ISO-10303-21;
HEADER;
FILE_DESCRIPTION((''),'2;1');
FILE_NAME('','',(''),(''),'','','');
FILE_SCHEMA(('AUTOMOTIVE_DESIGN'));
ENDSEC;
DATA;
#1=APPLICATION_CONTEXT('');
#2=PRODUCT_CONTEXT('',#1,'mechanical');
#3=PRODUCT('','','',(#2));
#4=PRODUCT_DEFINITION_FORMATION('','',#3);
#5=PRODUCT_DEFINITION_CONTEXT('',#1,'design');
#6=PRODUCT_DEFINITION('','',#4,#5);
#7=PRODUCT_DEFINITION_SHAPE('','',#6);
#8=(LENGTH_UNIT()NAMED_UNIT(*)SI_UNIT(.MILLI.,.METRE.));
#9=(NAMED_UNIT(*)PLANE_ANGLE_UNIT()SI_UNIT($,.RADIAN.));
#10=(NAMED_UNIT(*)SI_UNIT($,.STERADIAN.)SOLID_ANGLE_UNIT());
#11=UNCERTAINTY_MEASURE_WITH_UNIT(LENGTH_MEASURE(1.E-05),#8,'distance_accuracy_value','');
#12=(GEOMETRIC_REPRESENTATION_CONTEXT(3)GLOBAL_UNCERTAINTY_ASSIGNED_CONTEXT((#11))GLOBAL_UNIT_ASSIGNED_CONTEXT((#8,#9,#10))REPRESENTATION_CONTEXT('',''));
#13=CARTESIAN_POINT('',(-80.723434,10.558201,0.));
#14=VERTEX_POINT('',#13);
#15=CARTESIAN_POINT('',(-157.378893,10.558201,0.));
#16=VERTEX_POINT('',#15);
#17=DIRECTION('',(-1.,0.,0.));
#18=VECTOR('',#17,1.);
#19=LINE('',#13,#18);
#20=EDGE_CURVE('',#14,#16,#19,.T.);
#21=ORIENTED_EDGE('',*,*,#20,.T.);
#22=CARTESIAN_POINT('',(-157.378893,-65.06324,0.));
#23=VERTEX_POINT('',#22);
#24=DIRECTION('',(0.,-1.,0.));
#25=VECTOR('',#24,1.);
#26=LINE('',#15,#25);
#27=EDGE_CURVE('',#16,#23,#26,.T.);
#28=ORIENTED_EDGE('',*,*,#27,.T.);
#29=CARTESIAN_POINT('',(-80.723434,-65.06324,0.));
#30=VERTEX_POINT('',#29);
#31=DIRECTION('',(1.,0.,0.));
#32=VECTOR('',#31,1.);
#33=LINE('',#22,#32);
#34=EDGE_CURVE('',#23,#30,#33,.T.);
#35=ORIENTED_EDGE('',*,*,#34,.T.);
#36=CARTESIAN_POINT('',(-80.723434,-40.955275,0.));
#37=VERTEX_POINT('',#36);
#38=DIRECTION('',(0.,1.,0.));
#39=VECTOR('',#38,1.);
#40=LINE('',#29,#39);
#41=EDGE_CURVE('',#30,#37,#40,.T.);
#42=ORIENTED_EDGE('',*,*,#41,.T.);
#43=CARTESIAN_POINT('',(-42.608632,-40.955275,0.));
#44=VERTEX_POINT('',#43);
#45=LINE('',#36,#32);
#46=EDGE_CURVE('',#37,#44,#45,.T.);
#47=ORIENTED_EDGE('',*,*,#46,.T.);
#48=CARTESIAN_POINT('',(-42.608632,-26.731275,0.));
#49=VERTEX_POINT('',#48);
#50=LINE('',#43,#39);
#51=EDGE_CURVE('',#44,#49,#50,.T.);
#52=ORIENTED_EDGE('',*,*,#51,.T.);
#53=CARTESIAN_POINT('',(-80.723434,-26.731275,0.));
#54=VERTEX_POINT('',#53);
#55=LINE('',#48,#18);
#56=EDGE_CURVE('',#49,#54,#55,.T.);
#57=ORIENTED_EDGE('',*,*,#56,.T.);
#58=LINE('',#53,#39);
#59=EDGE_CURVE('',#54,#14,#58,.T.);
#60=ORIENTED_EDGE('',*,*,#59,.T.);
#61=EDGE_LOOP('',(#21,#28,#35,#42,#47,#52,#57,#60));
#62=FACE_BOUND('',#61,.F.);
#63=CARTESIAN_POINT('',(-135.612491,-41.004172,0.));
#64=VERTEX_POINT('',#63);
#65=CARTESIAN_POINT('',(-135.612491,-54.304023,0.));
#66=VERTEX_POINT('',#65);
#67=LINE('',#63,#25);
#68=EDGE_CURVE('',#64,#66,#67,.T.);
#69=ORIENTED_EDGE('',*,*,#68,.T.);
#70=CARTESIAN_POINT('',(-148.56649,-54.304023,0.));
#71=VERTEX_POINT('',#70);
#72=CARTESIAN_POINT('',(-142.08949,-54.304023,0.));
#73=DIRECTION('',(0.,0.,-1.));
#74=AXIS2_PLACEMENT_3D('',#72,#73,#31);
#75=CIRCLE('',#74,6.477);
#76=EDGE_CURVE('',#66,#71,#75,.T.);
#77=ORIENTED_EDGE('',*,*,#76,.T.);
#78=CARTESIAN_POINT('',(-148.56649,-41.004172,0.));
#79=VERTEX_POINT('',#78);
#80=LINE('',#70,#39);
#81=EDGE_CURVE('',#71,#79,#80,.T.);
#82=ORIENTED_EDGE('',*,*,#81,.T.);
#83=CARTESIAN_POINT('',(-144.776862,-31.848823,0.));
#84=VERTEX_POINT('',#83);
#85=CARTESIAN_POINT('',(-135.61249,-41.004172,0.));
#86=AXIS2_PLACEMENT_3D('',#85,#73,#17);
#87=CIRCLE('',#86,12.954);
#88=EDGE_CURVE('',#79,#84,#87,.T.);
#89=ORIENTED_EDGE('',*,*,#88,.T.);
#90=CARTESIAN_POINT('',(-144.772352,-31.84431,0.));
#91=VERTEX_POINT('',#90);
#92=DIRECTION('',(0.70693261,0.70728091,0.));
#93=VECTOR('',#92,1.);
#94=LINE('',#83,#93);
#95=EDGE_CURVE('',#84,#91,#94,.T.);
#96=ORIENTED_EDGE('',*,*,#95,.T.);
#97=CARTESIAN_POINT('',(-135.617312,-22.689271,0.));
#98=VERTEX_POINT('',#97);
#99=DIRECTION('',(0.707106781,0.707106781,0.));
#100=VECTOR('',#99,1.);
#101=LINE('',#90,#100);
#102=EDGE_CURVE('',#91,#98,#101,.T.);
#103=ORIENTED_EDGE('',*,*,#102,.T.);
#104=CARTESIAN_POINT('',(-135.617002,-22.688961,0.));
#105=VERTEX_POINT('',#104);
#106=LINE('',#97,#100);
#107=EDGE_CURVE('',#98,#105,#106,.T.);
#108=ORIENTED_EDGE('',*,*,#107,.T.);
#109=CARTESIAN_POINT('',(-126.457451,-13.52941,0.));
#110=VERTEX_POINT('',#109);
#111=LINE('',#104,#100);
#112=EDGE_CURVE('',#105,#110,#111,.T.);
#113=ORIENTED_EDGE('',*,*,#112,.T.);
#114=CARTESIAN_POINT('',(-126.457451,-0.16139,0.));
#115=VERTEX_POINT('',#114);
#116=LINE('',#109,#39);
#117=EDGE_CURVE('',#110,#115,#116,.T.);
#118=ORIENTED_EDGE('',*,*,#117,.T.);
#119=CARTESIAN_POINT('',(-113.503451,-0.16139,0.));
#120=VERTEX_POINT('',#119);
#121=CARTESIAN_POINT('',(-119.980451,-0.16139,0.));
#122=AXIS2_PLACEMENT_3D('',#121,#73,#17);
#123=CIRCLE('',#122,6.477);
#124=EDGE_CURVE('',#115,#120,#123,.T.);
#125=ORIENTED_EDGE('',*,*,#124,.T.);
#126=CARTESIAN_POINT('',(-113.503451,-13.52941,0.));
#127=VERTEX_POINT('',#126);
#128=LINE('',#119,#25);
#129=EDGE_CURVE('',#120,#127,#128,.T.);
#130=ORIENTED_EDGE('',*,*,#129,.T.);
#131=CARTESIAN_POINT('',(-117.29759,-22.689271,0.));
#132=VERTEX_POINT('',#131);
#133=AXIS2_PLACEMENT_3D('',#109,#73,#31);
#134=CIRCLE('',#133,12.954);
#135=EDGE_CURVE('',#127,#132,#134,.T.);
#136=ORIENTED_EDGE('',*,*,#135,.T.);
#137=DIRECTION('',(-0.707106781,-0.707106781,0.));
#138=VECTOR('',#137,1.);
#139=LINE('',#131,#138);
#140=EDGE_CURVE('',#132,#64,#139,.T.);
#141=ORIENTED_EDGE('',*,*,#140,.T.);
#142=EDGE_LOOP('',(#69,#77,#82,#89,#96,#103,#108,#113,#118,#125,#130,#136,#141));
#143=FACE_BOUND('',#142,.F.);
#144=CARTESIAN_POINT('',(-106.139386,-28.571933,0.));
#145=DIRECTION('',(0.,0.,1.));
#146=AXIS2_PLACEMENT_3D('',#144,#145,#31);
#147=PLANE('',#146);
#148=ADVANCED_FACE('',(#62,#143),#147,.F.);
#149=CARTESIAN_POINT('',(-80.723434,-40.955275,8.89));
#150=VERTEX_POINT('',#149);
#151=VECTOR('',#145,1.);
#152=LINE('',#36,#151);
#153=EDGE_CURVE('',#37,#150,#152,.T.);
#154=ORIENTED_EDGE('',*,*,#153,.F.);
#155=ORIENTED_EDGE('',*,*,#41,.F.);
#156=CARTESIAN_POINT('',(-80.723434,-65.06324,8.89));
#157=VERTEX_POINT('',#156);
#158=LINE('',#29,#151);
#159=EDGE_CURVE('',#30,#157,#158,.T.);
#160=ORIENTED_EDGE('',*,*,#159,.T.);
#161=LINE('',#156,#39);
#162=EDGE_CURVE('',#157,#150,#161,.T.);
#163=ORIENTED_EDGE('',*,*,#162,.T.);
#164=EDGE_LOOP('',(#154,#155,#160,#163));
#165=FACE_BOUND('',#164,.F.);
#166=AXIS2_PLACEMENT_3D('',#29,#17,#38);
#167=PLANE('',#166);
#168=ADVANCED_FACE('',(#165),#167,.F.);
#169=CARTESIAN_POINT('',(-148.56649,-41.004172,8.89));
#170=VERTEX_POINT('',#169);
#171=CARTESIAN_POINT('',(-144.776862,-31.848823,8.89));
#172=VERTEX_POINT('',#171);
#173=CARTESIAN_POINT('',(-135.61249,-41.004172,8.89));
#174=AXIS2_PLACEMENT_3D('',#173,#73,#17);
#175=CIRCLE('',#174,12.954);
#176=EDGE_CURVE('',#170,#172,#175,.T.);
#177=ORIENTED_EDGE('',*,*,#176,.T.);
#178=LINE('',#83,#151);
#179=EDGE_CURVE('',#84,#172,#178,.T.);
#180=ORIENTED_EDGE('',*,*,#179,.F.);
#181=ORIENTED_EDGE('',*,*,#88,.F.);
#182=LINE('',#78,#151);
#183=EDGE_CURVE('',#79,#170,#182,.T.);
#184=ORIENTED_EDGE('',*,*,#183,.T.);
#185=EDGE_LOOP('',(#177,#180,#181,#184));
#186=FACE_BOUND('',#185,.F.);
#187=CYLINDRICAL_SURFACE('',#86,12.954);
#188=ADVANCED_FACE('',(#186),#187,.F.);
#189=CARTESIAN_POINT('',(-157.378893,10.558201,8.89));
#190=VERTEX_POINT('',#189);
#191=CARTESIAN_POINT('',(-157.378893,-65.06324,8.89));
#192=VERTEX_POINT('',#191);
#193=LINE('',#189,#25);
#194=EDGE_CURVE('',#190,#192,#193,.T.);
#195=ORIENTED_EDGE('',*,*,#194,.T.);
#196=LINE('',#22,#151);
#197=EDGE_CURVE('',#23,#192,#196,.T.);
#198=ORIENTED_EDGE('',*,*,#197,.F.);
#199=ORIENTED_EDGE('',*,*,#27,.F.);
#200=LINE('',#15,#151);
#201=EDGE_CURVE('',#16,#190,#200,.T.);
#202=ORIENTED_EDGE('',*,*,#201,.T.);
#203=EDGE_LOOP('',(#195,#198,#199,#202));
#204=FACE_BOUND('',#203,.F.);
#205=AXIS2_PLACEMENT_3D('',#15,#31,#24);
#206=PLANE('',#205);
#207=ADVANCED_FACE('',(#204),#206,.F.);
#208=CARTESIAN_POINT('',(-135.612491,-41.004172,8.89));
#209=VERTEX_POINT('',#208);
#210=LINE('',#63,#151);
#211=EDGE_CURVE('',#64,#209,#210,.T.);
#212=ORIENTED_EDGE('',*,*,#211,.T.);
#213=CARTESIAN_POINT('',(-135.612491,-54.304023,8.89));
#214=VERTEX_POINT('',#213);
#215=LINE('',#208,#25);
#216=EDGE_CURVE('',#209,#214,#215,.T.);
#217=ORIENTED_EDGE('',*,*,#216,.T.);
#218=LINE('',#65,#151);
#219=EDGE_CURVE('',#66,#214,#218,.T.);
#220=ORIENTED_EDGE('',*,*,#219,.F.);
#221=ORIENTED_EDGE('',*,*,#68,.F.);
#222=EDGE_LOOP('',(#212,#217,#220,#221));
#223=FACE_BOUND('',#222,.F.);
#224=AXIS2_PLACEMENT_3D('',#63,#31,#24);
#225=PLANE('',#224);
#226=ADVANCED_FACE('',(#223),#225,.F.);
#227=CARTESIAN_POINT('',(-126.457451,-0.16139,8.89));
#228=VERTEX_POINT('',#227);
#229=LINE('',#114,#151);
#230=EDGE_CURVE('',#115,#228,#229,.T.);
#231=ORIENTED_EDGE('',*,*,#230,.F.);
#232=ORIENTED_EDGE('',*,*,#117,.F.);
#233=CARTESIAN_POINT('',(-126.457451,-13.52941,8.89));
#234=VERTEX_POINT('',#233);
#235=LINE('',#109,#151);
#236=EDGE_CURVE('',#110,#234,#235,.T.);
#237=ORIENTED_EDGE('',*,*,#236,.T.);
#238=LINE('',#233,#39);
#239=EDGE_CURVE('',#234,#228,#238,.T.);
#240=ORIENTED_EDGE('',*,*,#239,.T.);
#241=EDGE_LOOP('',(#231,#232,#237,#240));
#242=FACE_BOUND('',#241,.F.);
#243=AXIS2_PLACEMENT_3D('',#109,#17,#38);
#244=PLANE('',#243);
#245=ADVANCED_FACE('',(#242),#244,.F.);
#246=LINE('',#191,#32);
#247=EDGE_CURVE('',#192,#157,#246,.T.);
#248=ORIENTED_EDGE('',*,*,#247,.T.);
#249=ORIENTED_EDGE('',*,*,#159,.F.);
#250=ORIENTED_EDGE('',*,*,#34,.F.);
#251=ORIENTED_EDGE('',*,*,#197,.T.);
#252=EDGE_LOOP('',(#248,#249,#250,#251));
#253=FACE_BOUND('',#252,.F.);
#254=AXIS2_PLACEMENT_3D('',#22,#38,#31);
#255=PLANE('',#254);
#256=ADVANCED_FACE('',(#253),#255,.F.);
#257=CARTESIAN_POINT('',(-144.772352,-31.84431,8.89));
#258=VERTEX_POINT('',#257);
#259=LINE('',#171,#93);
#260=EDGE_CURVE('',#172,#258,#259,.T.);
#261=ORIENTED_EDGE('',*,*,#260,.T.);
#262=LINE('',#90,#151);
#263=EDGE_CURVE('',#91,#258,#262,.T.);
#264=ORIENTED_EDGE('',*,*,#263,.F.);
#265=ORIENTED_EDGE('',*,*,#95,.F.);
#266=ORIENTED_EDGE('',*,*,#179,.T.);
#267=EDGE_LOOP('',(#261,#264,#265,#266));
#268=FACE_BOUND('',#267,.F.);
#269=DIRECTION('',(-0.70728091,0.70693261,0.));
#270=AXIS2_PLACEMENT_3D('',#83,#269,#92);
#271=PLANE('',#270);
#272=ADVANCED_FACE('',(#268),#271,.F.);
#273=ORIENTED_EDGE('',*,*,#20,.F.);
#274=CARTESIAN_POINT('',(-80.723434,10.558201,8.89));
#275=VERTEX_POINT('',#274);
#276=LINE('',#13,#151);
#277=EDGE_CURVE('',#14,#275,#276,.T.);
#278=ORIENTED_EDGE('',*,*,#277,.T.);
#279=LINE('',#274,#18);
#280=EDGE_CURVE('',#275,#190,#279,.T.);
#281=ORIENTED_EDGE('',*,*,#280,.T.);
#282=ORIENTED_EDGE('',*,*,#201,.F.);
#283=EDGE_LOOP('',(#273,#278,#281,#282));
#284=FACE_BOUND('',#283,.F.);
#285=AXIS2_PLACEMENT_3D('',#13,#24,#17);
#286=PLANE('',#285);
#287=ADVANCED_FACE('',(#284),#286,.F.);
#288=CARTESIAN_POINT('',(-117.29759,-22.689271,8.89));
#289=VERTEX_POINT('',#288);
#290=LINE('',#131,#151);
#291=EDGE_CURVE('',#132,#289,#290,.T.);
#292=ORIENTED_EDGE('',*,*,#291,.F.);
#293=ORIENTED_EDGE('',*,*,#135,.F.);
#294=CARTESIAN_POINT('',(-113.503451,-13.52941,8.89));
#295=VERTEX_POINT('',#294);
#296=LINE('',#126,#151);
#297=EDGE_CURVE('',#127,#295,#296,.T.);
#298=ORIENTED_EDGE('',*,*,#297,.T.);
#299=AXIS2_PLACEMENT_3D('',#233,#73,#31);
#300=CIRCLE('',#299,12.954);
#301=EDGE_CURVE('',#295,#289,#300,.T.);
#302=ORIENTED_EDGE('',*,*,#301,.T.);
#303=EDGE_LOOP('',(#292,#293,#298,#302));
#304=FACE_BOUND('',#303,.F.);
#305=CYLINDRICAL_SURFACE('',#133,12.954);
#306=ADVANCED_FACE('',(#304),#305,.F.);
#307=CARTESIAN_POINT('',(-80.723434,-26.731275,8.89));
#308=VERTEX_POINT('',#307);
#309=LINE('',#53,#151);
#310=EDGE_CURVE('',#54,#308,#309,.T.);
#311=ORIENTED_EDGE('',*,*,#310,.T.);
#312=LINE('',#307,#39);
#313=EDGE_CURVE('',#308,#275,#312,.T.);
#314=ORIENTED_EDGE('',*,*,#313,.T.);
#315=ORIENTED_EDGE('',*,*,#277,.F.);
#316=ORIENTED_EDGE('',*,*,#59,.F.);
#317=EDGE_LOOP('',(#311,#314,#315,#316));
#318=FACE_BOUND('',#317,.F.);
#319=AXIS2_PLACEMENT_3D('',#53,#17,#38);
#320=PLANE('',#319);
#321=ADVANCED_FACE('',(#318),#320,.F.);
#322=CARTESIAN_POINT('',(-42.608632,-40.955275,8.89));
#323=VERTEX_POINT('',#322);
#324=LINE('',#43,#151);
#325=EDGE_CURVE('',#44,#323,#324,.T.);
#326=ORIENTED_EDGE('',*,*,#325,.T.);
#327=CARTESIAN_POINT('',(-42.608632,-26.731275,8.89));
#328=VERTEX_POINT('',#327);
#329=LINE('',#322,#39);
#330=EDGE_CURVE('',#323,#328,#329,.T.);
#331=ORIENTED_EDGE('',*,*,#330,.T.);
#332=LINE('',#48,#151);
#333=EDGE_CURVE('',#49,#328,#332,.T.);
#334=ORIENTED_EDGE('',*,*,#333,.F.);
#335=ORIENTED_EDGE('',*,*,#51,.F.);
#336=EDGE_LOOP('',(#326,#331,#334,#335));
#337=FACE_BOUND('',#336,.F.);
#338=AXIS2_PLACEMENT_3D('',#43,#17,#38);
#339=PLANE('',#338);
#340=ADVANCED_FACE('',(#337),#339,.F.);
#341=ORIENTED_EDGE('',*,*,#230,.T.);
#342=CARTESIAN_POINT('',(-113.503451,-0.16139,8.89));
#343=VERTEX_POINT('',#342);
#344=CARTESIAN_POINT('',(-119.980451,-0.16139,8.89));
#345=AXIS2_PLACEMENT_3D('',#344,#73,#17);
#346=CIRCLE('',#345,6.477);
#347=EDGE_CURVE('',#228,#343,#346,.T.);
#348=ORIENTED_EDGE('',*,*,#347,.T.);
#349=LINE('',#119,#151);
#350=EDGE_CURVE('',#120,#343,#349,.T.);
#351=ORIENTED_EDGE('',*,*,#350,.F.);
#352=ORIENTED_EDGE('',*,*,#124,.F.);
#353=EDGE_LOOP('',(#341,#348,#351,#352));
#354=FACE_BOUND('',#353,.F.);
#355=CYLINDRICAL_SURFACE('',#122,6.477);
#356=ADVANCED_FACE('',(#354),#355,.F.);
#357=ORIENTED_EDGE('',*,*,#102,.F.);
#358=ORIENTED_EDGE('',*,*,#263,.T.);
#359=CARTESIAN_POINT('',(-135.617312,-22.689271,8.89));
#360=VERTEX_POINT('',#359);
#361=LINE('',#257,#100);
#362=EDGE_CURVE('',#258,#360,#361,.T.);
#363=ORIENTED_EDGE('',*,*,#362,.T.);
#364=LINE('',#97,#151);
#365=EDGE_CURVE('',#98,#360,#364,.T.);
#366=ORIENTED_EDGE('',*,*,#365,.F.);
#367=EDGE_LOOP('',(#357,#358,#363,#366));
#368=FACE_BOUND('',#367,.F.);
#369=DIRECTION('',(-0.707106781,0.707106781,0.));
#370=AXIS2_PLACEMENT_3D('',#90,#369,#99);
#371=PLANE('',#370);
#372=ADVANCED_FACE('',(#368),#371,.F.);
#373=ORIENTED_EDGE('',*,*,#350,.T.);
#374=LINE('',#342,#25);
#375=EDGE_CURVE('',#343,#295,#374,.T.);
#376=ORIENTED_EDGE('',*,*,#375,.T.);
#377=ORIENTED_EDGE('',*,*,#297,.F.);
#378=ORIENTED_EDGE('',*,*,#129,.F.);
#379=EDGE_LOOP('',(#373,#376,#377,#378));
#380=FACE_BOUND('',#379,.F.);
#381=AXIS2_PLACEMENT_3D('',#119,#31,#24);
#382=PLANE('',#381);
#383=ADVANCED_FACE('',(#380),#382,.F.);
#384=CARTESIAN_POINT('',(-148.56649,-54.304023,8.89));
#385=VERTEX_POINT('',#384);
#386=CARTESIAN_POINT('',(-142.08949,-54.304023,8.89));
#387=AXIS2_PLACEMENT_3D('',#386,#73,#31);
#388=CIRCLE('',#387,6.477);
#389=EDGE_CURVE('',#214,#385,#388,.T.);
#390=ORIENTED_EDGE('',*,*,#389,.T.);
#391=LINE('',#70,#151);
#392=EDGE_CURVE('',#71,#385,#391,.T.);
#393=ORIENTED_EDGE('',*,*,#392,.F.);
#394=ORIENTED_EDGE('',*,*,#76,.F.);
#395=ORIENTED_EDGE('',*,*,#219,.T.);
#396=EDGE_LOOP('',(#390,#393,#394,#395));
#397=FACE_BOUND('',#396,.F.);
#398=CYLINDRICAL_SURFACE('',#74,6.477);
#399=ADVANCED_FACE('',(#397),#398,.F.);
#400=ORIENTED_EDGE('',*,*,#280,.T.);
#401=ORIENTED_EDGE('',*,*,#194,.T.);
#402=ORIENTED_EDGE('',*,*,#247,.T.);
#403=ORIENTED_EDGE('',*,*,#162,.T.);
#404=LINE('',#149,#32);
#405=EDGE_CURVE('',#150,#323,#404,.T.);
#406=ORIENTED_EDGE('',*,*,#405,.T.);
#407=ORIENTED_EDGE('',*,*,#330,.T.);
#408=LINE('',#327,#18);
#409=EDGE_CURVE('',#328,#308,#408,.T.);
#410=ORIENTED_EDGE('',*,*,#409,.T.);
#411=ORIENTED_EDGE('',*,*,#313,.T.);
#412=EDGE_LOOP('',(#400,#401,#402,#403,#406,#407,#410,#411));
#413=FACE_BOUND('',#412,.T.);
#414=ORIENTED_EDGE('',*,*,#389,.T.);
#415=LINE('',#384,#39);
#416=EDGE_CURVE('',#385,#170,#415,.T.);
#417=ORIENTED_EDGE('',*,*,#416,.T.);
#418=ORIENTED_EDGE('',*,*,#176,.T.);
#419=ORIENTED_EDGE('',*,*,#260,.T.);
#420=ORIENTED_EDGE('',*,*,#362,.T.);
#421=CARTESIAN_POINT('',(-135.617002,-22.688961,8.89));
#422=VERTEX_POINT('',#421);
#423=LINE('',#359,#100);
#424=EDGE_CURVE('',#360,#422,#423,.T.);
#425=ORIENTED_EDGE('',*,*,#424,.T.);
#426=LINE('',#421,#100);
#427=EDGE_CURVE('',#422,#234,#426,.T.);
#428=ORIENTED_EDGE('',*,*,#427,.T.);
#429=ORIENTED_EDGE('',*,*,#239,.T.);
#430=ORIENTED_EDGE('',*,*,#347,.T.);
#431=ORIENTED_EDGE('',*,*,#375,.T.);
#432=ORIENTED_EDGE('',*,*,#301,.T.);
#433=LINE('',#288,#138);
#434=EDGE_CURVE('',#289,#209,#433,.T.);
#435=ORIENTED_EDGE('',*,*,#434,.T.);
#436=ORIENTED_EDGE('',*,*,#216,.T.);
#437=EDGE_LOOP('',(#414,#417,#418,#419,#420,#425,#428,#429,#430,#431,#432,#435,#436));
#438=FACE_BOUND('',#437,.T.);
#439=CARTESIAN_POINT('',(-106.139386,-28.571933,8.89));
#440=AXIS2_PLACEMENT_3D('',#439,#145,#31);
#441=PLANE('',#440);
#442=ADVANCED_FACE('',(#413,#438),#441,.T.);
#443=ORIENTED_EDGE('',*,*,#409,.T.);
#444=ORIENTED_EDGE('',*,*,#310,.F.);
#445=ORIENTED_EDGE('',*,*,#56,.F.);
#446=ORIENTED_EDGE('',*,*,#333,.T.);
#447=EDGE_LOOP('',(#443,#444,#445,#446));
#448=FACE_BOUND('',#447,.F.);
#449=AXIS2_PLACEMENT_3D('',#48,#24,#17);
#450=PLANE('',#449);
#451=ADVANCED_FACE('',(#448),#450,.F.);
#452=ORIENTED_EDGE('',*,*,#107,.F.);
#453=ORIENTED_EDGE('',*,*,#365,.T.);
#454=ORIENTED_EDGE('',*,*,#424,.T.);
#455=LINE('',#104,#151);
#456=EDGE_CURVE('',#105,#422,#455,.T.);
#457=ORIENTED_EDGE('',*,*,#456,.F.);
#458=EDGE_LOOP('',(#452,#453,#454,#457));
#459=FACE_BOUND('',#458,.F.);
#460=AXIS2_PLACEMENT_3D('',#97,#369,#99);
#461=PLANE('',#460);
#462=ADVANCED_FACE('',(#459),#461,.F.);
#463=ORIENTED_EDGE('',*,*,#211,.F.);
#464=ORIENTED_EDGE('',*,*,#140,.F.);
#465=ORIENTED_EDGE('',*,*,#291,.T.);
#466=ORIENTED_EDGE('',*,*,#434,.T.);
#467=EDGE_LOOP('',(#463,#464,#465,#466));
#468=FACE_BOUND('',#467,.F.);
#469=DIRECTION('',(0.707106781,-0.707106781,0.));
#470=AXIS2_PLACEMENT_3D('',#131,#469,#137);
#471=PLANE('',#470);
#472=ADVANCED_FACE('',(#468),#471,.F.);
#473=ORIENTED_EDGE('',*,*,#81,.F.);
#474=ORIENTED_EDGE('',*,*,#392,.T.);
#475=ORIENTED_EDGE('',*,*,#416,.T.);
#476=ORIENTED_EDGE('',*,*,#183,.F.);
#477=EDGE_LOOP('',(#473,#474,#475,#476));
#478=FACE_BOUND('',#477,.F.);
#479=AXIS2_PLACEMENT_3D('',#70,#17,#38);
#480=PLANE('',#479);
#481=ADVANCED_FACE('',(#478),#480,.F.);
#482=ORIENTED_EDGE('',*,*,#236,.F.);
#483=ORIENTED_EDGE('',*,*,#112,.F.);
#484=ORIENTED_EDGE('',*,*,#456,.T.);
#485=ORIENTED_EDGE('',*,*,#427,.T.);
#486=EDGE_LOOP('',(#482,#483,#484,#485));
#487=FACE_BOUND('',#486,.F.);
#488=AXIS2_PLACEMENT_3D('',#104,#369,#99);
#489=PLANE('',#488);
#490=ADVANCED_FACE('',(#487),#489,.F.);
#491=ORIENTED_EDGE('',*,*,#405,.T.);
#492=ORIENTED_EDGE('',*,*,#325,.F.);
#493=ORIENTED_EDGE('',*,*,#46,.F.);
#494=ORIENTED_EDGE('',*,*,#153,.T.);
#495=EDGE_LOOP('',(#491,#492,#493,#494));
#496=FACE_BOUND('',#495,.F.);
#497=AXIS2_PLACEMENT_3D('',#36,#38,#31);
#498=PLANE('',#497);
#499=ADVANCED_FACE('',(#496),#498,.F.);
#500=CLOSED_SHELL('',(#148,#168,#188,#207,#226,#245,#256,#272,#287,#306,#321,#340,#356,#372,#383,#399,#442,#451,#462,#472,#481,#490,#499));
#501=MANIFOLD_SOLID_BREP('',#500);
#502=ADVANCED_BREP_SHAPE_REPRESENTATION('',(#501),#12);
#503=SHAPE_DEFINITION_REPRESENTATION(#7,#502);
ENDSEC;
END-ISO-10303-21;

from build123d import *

# Parameters (mm, degrees)
F1_DEPTH = 8.89


# Not quite as in the source:
# - ends of sketch curves that miss each other by under 0.0002 mm in the source are joined


with BuildPart() as f1:
    # F0 (on Top) → F1 (new body)
    with BuildSketch(Plane.XY):
        Polygon((-80.7234341223, 10.5582008122), (-130.004342081, 10.5582008122), (-157.3788927812, 10.5582008122), (-157.3788927812, -26.3808563827), (-157.3788927812, -65.0632401945), (-80.7234341223, -65.0632401945), (-80.7234341223, -40.955274603), (-42.608632099, -40.955274603), (-42.608632099, -33.843274603), (-42.608632099, -26.731274603), (-80.7234341223, -26.731274603), align=None)
        with BuildLine():
            Line((-135.6170021567, -22.6889609682), (-130.004342081, -17.0763008925))
            Line((-130.004342081, -17.0763008925), (-126.4574508613, -13.5294096728))
            Line((-126.4574508613, -13.5294096728), (-126.4574508613, -0.1613896728))
            ThreePointArc((-126.4574508613, -0.1613896728), (-119.9804508613, 6.3156103272), (-113.5034508613, -0.1613896728))
            Line((-113.5034508613, -0.1613896728), (-113.5034508613, -13.5294096728))
            ThreePointArc((-113.5034508613, -13.5294096728), (-114.4895153971, -18.4866908556), (-117.2975896178, -22.6892709163))
            Line((-117.2975896178, -22.6892709163), (-126.4526293546, -31.8443106531))
            Line((-126.4526293546, -31.8443106531), (-135.6124905981, -41.0041718966))
            Line((-135.6124905981, -41.0041718966), (-135.6124905981, -54.3040225299))
            ThreePointArc((-135.6124905981, -54.3040225299), (-142.089490459, -60.7810223908), (-148.56649032, -54.3040225299))
            Line((-148.56649032, -54.3040225299), (-148.56649032, -41.0041716185))
            ThreePointArc((-148.56649032, -41.0041716185), (-147.5816463153, -36.0498380851), (-144.7768622884, -31.8488233223))
            Line((-144.7768622884, -31.8488233223), (-144.7723515635, -31.844310375))
            Line((-144.7723515635, -31.844310375), (-135.6173121048, -22.6892709163))
            Line((-135.6173121048, -22.6892709163), (-135.6170021567, -22.6889609682))
        make_face(mode=Mode.SUBTRACT)
    extrude(amount=F1_DEPTH)


solid = f1.part
